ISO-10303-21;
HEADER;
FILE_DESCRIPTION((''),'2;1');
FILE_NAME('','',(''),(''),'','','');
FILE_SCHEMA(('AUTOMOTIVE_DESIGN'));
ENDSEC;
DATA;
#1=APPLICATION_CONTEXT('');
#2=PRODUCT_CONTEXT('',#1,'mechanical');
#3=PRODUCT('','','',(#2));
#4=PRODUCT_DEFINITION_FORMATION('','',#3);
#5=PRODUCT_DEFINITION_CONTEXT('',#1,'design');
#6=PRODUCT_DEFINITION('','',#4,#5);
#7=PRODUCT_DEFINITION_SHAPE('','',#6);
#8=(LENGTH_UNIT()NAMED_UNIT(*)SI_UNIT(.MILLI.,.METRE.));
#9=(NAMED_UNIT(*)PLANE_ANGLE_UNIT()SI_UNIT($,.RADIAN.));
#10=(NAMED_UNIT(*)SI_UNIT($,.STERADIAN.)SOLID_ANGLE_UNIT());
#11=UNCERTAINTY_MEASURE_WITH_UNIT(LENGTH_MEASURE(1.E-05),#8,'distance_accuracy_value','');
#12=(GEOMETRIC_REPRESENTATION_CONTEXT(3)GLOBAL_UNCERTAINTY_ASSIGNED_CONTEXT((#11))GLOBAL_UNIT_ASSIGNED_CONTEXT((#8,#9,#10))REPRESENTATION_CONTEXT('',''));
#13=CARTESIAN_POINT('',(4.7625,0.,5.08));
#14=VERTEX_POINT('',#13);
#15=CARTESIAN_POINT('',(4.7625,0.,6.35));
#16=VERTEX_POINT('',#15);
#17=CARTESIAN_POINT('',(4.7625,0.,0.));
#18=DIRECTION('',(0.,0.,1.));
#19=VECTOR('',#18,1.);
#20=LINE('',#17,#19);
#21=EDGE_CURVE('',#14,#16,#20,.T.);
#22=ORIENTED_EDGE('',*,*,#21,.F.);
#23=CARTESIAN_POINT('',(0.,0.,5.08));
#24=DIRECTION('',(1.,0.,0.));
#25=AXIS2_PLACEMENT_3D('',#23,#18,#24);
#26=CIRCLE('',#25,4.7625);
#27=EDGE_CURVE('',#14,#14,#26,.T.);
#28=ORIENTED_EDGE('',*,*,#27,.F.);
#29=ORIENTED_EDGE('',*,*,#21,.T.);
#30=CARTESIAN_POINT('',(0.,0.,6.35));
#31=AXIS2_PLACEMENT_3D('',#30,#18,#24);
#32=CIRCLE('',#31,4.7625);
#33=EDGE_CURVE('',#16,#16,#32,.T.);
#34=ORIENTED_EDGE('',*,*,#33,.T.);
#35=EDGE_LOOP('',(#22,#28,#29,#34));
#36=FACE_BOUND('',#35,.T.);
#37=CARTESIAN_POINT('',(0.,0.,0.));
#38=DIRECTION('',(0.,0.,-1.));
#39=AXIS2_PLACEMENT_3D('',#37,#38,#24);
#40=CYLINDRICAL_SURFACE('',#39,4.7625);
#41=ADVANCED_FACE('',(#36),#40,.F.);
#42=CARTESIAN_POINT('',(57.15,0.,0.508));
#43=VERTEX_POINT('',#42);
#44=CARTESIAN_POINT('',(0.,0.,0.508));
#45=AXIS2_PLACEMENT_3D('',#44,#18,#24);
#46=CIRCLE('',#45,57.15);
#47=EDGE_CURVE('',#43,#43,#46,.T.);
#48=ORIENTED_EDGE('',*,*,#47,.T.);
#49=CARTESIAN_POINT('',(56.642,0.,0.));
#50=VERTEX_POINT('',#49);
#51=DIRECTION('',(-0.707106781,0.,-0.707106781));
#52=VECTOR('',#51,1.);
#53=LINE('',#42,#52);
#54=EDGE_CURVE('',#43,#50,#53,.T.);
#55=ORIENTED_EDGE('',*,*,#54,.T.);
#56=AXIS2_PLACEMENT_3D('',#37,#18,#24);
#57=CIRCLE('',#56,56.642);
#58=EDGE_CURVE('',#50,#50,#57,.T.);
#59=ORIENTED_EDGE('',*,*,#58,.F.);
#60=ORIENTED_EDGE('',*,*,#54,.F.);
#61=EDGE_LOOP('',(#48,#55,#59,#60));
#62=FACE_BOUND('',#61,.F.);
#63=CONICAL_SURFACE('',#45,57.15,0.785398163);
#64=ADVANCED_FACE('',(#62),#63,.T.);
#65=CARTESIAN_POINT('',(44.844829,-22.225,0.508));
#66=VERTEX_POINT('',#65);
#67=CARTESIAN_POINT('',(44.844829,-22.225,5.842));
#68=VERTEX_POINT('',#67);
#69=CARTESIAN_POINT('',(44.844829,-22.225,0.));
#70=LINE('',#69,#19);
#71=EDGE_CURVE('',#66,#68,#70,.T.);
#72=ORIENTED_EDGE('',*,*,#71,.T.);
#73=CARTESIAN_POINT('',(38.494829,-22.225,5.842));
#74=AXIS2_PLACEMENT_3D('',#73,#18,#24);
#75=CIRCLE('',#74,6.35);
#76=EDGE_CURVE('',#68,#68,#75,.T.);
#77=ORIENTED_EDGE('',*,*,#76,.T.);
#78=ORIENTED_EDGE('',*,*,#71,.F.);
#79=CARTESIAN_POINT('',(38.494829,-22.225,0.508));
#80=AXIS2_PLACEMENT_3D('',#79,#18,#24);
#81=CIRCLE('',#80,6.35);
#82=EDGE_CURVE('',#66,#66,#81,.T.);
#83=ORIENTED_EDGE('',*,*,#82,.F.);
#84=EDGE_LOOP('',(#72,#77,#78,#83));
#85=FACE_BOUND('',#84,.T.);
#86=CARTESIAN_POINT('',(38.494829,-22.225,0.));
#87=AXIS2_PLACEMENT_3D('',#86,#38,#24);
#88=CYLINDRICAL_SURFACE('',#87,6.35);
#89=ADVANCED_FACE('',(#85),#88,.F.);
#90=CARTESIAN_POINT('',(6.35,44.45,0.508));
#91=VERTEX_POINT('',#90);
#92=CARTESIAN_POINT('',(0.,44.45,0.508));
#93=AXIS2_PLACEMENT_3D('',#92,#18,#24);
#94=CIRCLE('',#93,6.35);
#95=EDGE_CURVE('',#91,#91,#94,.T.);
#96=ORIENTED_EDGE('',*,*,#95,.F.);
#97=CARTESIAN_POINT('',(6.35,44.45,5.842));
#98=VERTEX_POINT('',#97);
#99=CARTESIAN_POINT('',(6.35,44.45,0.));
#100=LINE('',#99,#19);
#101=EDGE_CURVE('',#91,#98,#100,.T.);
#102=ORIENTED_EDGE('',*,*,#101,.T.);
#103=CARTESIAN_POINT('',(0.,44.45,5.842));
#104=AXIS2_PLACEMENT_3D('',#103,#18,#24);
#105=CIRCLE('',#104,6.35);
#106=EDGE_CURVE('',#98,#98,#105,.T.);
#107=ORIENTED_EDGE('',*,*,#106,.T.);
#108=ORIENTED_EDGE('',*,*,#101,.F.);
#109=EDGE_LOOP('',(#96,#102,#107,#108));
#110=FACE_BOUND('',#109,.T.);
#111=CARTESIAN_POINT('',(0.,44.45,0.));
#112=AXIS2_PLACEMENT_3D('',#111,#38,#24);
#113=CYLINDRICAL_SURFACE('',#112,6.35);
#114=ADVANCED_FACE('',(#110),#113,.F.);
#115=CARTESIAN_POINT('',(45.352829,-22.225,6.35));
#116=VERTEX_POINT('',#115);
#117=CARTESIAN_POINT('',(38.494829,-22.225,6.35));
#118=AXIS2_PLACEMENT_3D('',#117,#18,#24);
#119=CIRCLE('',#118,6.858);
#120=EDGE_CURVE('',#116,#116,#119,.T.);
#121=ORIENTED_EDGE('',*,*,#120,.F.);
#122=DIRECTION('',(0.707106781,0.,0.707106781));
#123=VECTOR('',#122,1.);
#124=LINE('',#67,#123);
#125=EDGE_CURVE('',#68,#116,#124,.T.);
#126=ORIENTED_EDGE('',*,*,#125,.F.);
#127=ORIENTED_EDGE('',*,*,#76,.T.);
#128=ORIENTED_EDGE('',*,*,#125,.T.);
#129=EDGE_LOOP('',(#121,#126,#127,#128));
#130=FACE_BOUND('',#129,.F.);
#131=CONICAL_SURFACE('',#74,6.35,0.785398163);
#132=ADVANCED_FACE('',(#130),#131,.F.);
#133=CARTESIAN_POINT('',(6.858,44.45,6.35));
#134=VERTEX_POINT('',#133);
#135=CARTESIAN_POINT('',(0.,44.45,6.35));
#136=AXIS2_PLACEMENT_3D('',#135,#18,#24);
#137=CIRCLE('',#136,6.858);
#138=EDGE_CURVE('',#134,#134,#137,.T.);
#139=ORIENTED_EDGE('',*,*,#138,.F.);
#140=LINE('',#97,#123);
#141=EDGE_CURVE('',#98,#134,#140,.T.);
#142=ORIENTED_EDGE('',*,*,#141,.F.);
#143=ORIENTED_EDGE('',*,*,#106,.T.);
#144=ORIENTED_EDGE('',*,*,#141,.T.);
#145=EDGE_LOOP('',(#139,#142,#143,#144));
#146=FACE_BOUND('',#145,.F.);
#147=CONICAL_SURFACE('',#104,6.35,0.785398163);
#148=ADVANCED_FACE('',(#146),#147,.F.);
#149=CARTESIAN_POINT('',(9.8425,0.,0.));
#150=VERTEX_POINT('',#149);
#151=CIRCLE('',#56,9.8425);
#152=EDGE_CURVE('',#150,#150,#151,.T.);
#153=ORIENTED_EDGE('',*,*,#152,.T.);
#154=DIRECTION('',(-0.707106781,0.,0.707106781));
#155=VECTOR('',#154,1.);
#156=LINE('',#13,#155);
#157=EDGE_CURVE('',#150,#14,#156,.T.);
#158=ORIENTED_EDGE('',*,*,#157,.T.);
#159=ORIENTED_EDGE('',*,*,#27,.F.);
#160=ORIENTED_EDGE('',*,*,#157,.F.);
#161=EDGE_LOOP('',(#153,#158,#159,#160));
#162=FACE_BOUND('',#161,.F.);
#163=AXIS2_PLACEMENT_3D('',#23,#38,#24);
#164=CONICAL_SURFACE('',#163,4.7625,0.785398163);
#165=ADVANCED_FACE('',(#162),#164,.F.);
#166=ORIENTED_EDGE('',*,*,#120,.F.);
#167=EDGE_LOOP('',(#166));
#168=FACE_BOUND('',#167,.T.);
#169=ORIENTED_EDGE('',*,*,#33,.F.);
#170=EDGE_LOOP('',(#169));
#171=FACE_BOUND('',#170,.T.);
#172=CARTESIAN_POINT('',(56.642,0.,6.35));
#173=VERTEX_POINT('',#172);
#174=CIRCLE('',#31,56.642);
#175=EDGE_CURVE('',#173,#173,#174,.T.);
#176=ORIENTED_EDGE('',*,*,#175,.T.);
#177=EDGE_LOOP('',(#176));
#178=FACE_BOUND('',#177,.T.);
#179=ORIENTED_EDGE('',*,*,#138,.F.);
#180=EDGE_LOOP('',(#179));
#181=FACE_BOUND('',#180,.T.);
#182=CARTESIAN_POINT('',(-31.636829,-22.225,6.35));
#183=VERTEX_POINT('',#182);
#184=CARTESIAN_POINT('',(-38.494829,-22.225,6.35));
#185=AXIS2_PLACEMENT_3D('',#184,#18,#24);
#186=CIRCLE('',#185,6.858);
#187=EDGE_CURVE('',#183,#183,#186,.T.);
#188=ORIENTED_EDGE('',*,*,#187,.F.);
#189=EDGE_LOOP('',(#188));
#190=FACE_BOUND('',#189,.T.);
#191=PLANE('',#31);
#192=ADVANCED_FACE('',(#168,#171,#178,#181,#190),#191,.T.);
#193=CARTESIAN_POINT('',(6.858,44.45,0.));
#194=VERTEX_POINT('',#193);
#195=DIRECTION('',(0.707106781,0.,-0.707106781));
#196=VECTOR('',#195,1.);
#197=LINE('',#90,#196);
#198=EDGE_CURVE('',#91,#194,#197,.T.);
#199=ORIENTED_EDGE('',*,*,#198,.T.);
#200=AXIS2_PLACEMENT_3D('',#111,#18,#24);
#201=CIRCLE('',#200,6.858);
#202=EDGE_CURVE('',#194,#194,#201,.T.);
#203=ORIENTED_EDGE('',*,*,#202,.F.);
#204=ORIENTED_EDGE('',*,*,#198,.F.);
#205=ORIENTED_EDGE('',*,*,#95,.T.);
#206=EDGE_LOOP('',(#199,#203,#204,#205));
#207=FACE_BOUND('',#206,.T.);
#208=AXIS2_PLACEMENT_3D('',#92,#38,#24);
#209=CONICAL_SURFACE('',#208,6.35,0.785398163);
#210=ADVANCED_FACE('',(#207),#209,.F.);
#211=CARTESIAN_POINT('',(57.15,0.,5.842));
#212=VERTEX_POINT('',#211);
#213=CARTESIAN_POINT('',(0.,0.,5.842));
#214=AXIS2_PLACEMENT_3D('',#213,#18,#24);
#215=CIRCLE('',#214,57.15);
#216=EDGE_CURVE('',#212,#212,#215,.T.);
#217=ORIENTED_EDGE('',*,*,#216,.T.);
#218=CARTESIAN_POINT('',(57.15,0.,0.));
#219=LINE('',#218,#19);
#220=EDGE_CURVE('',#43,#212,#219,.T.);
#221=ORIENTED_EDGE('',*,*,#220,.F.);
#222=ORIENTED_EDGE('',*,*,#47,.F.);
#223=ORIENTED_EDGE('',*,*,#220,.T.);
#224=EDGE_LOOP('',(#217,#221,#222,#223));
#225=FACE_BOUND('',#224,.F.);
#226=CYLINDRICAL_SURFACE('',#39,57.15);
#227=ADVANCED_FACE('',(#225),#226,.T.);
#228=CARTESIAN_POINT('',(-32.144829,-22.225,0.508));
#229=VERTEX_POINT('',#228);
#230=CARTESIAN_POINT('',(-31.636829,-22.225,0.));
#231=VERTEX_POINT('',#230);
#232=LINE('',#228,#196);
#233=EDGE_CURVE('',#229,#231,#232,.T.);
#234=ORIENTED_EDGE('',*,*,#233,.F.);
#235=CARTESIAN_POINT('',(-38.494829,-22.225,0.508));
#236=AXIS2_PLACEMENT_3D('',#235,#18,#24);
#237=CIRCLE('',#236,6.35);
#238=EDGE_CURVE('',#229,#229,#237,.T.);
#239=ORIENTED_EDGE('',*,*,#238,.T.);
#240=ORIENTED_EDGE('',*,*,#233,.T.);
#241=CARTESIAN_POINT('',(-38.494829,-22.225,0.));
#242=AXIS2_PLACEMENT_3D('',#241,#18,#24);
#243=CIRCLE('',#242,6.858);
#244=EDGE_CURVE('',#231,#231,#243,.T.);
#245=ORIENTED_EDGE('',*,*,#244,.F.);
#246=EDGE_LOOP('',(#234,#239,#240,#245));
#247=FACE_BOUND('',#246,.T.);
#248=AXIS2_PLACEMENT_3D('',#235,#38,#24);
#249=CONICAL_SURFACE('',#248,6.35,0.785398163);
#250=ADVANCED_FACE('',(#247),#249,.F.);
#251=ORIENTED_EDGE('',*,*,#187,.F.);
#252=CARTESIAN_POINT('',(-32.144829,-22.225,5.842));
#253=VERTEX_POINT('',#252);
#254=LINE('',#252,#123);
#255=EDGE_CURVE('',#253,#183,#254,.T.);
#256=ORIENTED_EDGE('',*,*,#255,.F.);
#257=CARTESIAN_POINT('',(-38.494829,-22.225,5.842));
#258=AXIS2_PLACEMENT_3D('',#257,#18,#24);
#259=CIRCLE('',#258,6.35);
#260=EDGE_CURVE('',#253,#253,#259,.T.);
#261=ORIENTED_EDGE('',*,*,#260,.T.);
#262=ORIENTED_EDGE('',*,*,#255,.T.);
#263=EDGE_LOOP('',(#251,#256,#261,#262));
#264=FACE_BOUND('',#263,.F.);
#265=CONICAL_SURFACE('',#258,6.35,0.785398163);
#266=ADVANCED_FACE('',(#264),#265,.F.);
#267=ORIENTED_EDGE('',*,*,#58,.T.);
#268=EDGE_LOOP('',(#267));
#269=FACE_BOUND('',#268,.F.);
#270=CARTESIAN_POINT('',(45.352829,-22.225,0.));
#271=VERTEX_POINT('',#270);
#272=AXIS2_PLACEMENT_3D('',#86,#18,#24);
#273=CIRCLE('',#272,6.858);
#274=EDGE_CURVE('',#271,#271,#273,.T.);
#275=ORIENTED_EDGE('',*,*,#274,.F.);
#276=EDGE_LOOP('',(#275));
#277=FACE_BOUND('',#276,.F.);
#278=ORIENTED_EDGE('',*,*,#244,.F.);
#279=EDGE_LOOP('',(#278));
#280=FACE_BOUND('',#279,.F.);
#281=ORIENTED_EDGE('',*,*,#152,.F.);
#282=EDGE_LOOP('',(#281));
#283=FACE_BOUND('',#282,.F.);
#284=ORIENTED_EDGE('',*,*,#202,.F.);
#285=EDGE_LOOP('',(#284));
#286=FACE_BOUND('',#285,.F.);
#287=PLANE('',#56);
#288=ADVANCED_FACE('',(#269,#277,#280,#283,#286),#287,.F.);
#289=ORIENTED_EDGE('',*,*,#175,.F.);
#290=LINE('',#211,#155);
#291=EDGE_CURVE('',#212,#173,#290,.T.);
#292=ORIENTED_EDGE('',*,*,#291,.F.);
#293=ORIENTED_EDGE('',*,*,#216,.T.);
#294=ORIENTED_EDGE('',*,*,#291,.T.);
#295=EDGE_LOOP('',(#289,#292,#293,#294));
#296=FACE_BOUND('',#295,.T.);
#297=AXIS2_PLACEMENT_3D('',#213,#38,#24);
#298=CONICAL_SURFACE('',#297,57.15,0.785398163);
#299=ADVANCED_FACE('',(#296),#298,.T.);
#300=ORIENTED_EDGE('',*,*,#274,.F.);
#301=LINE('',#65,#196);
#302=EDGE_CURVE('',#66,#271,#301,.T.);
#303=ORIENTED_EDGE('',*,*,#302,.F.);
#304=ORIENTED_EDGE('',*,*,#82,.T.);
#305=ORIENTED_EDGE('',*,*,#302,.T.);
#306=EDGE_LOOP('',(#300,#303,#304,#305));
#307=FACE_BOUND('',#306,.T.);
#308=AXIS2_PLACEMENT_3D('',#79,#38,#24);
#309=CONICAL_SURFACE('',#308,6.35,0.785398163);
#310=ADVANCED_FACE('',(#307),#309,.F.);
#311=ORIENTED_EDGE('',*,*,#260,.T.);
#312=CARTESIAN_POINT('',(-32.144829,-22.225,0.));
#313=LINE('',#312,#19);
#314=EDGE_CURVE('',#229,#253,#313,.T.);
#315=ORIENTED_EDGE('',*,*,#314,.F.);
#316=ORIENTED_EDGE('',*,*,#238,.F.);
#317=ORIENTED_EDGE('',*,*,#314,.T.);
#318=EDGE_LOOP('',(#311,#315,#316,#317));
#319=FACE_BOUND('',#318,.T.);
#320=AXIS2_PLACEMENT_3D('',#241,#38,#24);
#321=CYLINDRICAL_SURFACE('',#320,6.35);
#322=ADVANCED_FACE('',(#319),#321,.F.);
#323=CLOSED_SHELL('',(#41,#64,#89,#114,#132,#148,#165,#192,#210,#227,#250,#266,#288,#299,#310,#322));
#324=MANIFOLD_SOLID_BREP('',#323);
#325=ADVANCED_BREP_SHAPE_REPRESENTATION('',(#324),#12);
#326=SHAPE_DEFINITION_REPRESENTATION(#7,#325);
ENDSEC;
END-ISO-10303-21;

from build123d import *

# Parameters (mm, degrees)
F0_R     = 57.15
F0_R_2   = 6.35
F0_R_3   = 4.7625
F1_DEPTH = 6.35
F2_SIZE  = 0.508
F3_SIZE  = 5.08


# Not quite as in the source:
# - a feature names something its author has since deleted; it is built from what else it names


with BuildPart() as f1:
    # F0 (on Top) → F1 (new body)
    with BuildSketch(Plane.XY):
        Circle(F0_R)
        with Locations((-38.4948291982, -22.225)):
            Circle(F0_R_2, mode=Mode.SUBTRACT)
        with Locations((38.4948291982, -22.225)):
            Circle(F0_R_2, mode=Mode.SUBTRACT)
        Circle(F0_R_3, mode=Mode.SUBTRACT)
        with Locations((0, 44.45)):
            Circle(F0_R_2, mode=Mode.SUBTRACT)
    extrude(amount=F1_DEPTH)

    # F2
    f2_edges = [f1.edges().sort_by_distance(p)[0] for p in [
        (-57.15, 0, 6.35),
        (-6.35, 44.45, 6.35),
        (-44.844829, -22.225, 6.35),
        (32.144829, -22.225, 6.35),
        (-57.15, 0, 0),
        (-6.35, 44.45, 0),
        (32.144829, -22.225, 0),
        (-44.844829, -22.225, 0),
    ]]
    chamfer(f2_edges, length=F2_SIZE)

    # F3
    f3_edges = [f1.edges().sort_by_distance(p)[0] for p in [
        (-4.7625, 0, 0),
    ]]
    chamfer(f3_edges, length=F3_SIZE)


solid = f1.part
